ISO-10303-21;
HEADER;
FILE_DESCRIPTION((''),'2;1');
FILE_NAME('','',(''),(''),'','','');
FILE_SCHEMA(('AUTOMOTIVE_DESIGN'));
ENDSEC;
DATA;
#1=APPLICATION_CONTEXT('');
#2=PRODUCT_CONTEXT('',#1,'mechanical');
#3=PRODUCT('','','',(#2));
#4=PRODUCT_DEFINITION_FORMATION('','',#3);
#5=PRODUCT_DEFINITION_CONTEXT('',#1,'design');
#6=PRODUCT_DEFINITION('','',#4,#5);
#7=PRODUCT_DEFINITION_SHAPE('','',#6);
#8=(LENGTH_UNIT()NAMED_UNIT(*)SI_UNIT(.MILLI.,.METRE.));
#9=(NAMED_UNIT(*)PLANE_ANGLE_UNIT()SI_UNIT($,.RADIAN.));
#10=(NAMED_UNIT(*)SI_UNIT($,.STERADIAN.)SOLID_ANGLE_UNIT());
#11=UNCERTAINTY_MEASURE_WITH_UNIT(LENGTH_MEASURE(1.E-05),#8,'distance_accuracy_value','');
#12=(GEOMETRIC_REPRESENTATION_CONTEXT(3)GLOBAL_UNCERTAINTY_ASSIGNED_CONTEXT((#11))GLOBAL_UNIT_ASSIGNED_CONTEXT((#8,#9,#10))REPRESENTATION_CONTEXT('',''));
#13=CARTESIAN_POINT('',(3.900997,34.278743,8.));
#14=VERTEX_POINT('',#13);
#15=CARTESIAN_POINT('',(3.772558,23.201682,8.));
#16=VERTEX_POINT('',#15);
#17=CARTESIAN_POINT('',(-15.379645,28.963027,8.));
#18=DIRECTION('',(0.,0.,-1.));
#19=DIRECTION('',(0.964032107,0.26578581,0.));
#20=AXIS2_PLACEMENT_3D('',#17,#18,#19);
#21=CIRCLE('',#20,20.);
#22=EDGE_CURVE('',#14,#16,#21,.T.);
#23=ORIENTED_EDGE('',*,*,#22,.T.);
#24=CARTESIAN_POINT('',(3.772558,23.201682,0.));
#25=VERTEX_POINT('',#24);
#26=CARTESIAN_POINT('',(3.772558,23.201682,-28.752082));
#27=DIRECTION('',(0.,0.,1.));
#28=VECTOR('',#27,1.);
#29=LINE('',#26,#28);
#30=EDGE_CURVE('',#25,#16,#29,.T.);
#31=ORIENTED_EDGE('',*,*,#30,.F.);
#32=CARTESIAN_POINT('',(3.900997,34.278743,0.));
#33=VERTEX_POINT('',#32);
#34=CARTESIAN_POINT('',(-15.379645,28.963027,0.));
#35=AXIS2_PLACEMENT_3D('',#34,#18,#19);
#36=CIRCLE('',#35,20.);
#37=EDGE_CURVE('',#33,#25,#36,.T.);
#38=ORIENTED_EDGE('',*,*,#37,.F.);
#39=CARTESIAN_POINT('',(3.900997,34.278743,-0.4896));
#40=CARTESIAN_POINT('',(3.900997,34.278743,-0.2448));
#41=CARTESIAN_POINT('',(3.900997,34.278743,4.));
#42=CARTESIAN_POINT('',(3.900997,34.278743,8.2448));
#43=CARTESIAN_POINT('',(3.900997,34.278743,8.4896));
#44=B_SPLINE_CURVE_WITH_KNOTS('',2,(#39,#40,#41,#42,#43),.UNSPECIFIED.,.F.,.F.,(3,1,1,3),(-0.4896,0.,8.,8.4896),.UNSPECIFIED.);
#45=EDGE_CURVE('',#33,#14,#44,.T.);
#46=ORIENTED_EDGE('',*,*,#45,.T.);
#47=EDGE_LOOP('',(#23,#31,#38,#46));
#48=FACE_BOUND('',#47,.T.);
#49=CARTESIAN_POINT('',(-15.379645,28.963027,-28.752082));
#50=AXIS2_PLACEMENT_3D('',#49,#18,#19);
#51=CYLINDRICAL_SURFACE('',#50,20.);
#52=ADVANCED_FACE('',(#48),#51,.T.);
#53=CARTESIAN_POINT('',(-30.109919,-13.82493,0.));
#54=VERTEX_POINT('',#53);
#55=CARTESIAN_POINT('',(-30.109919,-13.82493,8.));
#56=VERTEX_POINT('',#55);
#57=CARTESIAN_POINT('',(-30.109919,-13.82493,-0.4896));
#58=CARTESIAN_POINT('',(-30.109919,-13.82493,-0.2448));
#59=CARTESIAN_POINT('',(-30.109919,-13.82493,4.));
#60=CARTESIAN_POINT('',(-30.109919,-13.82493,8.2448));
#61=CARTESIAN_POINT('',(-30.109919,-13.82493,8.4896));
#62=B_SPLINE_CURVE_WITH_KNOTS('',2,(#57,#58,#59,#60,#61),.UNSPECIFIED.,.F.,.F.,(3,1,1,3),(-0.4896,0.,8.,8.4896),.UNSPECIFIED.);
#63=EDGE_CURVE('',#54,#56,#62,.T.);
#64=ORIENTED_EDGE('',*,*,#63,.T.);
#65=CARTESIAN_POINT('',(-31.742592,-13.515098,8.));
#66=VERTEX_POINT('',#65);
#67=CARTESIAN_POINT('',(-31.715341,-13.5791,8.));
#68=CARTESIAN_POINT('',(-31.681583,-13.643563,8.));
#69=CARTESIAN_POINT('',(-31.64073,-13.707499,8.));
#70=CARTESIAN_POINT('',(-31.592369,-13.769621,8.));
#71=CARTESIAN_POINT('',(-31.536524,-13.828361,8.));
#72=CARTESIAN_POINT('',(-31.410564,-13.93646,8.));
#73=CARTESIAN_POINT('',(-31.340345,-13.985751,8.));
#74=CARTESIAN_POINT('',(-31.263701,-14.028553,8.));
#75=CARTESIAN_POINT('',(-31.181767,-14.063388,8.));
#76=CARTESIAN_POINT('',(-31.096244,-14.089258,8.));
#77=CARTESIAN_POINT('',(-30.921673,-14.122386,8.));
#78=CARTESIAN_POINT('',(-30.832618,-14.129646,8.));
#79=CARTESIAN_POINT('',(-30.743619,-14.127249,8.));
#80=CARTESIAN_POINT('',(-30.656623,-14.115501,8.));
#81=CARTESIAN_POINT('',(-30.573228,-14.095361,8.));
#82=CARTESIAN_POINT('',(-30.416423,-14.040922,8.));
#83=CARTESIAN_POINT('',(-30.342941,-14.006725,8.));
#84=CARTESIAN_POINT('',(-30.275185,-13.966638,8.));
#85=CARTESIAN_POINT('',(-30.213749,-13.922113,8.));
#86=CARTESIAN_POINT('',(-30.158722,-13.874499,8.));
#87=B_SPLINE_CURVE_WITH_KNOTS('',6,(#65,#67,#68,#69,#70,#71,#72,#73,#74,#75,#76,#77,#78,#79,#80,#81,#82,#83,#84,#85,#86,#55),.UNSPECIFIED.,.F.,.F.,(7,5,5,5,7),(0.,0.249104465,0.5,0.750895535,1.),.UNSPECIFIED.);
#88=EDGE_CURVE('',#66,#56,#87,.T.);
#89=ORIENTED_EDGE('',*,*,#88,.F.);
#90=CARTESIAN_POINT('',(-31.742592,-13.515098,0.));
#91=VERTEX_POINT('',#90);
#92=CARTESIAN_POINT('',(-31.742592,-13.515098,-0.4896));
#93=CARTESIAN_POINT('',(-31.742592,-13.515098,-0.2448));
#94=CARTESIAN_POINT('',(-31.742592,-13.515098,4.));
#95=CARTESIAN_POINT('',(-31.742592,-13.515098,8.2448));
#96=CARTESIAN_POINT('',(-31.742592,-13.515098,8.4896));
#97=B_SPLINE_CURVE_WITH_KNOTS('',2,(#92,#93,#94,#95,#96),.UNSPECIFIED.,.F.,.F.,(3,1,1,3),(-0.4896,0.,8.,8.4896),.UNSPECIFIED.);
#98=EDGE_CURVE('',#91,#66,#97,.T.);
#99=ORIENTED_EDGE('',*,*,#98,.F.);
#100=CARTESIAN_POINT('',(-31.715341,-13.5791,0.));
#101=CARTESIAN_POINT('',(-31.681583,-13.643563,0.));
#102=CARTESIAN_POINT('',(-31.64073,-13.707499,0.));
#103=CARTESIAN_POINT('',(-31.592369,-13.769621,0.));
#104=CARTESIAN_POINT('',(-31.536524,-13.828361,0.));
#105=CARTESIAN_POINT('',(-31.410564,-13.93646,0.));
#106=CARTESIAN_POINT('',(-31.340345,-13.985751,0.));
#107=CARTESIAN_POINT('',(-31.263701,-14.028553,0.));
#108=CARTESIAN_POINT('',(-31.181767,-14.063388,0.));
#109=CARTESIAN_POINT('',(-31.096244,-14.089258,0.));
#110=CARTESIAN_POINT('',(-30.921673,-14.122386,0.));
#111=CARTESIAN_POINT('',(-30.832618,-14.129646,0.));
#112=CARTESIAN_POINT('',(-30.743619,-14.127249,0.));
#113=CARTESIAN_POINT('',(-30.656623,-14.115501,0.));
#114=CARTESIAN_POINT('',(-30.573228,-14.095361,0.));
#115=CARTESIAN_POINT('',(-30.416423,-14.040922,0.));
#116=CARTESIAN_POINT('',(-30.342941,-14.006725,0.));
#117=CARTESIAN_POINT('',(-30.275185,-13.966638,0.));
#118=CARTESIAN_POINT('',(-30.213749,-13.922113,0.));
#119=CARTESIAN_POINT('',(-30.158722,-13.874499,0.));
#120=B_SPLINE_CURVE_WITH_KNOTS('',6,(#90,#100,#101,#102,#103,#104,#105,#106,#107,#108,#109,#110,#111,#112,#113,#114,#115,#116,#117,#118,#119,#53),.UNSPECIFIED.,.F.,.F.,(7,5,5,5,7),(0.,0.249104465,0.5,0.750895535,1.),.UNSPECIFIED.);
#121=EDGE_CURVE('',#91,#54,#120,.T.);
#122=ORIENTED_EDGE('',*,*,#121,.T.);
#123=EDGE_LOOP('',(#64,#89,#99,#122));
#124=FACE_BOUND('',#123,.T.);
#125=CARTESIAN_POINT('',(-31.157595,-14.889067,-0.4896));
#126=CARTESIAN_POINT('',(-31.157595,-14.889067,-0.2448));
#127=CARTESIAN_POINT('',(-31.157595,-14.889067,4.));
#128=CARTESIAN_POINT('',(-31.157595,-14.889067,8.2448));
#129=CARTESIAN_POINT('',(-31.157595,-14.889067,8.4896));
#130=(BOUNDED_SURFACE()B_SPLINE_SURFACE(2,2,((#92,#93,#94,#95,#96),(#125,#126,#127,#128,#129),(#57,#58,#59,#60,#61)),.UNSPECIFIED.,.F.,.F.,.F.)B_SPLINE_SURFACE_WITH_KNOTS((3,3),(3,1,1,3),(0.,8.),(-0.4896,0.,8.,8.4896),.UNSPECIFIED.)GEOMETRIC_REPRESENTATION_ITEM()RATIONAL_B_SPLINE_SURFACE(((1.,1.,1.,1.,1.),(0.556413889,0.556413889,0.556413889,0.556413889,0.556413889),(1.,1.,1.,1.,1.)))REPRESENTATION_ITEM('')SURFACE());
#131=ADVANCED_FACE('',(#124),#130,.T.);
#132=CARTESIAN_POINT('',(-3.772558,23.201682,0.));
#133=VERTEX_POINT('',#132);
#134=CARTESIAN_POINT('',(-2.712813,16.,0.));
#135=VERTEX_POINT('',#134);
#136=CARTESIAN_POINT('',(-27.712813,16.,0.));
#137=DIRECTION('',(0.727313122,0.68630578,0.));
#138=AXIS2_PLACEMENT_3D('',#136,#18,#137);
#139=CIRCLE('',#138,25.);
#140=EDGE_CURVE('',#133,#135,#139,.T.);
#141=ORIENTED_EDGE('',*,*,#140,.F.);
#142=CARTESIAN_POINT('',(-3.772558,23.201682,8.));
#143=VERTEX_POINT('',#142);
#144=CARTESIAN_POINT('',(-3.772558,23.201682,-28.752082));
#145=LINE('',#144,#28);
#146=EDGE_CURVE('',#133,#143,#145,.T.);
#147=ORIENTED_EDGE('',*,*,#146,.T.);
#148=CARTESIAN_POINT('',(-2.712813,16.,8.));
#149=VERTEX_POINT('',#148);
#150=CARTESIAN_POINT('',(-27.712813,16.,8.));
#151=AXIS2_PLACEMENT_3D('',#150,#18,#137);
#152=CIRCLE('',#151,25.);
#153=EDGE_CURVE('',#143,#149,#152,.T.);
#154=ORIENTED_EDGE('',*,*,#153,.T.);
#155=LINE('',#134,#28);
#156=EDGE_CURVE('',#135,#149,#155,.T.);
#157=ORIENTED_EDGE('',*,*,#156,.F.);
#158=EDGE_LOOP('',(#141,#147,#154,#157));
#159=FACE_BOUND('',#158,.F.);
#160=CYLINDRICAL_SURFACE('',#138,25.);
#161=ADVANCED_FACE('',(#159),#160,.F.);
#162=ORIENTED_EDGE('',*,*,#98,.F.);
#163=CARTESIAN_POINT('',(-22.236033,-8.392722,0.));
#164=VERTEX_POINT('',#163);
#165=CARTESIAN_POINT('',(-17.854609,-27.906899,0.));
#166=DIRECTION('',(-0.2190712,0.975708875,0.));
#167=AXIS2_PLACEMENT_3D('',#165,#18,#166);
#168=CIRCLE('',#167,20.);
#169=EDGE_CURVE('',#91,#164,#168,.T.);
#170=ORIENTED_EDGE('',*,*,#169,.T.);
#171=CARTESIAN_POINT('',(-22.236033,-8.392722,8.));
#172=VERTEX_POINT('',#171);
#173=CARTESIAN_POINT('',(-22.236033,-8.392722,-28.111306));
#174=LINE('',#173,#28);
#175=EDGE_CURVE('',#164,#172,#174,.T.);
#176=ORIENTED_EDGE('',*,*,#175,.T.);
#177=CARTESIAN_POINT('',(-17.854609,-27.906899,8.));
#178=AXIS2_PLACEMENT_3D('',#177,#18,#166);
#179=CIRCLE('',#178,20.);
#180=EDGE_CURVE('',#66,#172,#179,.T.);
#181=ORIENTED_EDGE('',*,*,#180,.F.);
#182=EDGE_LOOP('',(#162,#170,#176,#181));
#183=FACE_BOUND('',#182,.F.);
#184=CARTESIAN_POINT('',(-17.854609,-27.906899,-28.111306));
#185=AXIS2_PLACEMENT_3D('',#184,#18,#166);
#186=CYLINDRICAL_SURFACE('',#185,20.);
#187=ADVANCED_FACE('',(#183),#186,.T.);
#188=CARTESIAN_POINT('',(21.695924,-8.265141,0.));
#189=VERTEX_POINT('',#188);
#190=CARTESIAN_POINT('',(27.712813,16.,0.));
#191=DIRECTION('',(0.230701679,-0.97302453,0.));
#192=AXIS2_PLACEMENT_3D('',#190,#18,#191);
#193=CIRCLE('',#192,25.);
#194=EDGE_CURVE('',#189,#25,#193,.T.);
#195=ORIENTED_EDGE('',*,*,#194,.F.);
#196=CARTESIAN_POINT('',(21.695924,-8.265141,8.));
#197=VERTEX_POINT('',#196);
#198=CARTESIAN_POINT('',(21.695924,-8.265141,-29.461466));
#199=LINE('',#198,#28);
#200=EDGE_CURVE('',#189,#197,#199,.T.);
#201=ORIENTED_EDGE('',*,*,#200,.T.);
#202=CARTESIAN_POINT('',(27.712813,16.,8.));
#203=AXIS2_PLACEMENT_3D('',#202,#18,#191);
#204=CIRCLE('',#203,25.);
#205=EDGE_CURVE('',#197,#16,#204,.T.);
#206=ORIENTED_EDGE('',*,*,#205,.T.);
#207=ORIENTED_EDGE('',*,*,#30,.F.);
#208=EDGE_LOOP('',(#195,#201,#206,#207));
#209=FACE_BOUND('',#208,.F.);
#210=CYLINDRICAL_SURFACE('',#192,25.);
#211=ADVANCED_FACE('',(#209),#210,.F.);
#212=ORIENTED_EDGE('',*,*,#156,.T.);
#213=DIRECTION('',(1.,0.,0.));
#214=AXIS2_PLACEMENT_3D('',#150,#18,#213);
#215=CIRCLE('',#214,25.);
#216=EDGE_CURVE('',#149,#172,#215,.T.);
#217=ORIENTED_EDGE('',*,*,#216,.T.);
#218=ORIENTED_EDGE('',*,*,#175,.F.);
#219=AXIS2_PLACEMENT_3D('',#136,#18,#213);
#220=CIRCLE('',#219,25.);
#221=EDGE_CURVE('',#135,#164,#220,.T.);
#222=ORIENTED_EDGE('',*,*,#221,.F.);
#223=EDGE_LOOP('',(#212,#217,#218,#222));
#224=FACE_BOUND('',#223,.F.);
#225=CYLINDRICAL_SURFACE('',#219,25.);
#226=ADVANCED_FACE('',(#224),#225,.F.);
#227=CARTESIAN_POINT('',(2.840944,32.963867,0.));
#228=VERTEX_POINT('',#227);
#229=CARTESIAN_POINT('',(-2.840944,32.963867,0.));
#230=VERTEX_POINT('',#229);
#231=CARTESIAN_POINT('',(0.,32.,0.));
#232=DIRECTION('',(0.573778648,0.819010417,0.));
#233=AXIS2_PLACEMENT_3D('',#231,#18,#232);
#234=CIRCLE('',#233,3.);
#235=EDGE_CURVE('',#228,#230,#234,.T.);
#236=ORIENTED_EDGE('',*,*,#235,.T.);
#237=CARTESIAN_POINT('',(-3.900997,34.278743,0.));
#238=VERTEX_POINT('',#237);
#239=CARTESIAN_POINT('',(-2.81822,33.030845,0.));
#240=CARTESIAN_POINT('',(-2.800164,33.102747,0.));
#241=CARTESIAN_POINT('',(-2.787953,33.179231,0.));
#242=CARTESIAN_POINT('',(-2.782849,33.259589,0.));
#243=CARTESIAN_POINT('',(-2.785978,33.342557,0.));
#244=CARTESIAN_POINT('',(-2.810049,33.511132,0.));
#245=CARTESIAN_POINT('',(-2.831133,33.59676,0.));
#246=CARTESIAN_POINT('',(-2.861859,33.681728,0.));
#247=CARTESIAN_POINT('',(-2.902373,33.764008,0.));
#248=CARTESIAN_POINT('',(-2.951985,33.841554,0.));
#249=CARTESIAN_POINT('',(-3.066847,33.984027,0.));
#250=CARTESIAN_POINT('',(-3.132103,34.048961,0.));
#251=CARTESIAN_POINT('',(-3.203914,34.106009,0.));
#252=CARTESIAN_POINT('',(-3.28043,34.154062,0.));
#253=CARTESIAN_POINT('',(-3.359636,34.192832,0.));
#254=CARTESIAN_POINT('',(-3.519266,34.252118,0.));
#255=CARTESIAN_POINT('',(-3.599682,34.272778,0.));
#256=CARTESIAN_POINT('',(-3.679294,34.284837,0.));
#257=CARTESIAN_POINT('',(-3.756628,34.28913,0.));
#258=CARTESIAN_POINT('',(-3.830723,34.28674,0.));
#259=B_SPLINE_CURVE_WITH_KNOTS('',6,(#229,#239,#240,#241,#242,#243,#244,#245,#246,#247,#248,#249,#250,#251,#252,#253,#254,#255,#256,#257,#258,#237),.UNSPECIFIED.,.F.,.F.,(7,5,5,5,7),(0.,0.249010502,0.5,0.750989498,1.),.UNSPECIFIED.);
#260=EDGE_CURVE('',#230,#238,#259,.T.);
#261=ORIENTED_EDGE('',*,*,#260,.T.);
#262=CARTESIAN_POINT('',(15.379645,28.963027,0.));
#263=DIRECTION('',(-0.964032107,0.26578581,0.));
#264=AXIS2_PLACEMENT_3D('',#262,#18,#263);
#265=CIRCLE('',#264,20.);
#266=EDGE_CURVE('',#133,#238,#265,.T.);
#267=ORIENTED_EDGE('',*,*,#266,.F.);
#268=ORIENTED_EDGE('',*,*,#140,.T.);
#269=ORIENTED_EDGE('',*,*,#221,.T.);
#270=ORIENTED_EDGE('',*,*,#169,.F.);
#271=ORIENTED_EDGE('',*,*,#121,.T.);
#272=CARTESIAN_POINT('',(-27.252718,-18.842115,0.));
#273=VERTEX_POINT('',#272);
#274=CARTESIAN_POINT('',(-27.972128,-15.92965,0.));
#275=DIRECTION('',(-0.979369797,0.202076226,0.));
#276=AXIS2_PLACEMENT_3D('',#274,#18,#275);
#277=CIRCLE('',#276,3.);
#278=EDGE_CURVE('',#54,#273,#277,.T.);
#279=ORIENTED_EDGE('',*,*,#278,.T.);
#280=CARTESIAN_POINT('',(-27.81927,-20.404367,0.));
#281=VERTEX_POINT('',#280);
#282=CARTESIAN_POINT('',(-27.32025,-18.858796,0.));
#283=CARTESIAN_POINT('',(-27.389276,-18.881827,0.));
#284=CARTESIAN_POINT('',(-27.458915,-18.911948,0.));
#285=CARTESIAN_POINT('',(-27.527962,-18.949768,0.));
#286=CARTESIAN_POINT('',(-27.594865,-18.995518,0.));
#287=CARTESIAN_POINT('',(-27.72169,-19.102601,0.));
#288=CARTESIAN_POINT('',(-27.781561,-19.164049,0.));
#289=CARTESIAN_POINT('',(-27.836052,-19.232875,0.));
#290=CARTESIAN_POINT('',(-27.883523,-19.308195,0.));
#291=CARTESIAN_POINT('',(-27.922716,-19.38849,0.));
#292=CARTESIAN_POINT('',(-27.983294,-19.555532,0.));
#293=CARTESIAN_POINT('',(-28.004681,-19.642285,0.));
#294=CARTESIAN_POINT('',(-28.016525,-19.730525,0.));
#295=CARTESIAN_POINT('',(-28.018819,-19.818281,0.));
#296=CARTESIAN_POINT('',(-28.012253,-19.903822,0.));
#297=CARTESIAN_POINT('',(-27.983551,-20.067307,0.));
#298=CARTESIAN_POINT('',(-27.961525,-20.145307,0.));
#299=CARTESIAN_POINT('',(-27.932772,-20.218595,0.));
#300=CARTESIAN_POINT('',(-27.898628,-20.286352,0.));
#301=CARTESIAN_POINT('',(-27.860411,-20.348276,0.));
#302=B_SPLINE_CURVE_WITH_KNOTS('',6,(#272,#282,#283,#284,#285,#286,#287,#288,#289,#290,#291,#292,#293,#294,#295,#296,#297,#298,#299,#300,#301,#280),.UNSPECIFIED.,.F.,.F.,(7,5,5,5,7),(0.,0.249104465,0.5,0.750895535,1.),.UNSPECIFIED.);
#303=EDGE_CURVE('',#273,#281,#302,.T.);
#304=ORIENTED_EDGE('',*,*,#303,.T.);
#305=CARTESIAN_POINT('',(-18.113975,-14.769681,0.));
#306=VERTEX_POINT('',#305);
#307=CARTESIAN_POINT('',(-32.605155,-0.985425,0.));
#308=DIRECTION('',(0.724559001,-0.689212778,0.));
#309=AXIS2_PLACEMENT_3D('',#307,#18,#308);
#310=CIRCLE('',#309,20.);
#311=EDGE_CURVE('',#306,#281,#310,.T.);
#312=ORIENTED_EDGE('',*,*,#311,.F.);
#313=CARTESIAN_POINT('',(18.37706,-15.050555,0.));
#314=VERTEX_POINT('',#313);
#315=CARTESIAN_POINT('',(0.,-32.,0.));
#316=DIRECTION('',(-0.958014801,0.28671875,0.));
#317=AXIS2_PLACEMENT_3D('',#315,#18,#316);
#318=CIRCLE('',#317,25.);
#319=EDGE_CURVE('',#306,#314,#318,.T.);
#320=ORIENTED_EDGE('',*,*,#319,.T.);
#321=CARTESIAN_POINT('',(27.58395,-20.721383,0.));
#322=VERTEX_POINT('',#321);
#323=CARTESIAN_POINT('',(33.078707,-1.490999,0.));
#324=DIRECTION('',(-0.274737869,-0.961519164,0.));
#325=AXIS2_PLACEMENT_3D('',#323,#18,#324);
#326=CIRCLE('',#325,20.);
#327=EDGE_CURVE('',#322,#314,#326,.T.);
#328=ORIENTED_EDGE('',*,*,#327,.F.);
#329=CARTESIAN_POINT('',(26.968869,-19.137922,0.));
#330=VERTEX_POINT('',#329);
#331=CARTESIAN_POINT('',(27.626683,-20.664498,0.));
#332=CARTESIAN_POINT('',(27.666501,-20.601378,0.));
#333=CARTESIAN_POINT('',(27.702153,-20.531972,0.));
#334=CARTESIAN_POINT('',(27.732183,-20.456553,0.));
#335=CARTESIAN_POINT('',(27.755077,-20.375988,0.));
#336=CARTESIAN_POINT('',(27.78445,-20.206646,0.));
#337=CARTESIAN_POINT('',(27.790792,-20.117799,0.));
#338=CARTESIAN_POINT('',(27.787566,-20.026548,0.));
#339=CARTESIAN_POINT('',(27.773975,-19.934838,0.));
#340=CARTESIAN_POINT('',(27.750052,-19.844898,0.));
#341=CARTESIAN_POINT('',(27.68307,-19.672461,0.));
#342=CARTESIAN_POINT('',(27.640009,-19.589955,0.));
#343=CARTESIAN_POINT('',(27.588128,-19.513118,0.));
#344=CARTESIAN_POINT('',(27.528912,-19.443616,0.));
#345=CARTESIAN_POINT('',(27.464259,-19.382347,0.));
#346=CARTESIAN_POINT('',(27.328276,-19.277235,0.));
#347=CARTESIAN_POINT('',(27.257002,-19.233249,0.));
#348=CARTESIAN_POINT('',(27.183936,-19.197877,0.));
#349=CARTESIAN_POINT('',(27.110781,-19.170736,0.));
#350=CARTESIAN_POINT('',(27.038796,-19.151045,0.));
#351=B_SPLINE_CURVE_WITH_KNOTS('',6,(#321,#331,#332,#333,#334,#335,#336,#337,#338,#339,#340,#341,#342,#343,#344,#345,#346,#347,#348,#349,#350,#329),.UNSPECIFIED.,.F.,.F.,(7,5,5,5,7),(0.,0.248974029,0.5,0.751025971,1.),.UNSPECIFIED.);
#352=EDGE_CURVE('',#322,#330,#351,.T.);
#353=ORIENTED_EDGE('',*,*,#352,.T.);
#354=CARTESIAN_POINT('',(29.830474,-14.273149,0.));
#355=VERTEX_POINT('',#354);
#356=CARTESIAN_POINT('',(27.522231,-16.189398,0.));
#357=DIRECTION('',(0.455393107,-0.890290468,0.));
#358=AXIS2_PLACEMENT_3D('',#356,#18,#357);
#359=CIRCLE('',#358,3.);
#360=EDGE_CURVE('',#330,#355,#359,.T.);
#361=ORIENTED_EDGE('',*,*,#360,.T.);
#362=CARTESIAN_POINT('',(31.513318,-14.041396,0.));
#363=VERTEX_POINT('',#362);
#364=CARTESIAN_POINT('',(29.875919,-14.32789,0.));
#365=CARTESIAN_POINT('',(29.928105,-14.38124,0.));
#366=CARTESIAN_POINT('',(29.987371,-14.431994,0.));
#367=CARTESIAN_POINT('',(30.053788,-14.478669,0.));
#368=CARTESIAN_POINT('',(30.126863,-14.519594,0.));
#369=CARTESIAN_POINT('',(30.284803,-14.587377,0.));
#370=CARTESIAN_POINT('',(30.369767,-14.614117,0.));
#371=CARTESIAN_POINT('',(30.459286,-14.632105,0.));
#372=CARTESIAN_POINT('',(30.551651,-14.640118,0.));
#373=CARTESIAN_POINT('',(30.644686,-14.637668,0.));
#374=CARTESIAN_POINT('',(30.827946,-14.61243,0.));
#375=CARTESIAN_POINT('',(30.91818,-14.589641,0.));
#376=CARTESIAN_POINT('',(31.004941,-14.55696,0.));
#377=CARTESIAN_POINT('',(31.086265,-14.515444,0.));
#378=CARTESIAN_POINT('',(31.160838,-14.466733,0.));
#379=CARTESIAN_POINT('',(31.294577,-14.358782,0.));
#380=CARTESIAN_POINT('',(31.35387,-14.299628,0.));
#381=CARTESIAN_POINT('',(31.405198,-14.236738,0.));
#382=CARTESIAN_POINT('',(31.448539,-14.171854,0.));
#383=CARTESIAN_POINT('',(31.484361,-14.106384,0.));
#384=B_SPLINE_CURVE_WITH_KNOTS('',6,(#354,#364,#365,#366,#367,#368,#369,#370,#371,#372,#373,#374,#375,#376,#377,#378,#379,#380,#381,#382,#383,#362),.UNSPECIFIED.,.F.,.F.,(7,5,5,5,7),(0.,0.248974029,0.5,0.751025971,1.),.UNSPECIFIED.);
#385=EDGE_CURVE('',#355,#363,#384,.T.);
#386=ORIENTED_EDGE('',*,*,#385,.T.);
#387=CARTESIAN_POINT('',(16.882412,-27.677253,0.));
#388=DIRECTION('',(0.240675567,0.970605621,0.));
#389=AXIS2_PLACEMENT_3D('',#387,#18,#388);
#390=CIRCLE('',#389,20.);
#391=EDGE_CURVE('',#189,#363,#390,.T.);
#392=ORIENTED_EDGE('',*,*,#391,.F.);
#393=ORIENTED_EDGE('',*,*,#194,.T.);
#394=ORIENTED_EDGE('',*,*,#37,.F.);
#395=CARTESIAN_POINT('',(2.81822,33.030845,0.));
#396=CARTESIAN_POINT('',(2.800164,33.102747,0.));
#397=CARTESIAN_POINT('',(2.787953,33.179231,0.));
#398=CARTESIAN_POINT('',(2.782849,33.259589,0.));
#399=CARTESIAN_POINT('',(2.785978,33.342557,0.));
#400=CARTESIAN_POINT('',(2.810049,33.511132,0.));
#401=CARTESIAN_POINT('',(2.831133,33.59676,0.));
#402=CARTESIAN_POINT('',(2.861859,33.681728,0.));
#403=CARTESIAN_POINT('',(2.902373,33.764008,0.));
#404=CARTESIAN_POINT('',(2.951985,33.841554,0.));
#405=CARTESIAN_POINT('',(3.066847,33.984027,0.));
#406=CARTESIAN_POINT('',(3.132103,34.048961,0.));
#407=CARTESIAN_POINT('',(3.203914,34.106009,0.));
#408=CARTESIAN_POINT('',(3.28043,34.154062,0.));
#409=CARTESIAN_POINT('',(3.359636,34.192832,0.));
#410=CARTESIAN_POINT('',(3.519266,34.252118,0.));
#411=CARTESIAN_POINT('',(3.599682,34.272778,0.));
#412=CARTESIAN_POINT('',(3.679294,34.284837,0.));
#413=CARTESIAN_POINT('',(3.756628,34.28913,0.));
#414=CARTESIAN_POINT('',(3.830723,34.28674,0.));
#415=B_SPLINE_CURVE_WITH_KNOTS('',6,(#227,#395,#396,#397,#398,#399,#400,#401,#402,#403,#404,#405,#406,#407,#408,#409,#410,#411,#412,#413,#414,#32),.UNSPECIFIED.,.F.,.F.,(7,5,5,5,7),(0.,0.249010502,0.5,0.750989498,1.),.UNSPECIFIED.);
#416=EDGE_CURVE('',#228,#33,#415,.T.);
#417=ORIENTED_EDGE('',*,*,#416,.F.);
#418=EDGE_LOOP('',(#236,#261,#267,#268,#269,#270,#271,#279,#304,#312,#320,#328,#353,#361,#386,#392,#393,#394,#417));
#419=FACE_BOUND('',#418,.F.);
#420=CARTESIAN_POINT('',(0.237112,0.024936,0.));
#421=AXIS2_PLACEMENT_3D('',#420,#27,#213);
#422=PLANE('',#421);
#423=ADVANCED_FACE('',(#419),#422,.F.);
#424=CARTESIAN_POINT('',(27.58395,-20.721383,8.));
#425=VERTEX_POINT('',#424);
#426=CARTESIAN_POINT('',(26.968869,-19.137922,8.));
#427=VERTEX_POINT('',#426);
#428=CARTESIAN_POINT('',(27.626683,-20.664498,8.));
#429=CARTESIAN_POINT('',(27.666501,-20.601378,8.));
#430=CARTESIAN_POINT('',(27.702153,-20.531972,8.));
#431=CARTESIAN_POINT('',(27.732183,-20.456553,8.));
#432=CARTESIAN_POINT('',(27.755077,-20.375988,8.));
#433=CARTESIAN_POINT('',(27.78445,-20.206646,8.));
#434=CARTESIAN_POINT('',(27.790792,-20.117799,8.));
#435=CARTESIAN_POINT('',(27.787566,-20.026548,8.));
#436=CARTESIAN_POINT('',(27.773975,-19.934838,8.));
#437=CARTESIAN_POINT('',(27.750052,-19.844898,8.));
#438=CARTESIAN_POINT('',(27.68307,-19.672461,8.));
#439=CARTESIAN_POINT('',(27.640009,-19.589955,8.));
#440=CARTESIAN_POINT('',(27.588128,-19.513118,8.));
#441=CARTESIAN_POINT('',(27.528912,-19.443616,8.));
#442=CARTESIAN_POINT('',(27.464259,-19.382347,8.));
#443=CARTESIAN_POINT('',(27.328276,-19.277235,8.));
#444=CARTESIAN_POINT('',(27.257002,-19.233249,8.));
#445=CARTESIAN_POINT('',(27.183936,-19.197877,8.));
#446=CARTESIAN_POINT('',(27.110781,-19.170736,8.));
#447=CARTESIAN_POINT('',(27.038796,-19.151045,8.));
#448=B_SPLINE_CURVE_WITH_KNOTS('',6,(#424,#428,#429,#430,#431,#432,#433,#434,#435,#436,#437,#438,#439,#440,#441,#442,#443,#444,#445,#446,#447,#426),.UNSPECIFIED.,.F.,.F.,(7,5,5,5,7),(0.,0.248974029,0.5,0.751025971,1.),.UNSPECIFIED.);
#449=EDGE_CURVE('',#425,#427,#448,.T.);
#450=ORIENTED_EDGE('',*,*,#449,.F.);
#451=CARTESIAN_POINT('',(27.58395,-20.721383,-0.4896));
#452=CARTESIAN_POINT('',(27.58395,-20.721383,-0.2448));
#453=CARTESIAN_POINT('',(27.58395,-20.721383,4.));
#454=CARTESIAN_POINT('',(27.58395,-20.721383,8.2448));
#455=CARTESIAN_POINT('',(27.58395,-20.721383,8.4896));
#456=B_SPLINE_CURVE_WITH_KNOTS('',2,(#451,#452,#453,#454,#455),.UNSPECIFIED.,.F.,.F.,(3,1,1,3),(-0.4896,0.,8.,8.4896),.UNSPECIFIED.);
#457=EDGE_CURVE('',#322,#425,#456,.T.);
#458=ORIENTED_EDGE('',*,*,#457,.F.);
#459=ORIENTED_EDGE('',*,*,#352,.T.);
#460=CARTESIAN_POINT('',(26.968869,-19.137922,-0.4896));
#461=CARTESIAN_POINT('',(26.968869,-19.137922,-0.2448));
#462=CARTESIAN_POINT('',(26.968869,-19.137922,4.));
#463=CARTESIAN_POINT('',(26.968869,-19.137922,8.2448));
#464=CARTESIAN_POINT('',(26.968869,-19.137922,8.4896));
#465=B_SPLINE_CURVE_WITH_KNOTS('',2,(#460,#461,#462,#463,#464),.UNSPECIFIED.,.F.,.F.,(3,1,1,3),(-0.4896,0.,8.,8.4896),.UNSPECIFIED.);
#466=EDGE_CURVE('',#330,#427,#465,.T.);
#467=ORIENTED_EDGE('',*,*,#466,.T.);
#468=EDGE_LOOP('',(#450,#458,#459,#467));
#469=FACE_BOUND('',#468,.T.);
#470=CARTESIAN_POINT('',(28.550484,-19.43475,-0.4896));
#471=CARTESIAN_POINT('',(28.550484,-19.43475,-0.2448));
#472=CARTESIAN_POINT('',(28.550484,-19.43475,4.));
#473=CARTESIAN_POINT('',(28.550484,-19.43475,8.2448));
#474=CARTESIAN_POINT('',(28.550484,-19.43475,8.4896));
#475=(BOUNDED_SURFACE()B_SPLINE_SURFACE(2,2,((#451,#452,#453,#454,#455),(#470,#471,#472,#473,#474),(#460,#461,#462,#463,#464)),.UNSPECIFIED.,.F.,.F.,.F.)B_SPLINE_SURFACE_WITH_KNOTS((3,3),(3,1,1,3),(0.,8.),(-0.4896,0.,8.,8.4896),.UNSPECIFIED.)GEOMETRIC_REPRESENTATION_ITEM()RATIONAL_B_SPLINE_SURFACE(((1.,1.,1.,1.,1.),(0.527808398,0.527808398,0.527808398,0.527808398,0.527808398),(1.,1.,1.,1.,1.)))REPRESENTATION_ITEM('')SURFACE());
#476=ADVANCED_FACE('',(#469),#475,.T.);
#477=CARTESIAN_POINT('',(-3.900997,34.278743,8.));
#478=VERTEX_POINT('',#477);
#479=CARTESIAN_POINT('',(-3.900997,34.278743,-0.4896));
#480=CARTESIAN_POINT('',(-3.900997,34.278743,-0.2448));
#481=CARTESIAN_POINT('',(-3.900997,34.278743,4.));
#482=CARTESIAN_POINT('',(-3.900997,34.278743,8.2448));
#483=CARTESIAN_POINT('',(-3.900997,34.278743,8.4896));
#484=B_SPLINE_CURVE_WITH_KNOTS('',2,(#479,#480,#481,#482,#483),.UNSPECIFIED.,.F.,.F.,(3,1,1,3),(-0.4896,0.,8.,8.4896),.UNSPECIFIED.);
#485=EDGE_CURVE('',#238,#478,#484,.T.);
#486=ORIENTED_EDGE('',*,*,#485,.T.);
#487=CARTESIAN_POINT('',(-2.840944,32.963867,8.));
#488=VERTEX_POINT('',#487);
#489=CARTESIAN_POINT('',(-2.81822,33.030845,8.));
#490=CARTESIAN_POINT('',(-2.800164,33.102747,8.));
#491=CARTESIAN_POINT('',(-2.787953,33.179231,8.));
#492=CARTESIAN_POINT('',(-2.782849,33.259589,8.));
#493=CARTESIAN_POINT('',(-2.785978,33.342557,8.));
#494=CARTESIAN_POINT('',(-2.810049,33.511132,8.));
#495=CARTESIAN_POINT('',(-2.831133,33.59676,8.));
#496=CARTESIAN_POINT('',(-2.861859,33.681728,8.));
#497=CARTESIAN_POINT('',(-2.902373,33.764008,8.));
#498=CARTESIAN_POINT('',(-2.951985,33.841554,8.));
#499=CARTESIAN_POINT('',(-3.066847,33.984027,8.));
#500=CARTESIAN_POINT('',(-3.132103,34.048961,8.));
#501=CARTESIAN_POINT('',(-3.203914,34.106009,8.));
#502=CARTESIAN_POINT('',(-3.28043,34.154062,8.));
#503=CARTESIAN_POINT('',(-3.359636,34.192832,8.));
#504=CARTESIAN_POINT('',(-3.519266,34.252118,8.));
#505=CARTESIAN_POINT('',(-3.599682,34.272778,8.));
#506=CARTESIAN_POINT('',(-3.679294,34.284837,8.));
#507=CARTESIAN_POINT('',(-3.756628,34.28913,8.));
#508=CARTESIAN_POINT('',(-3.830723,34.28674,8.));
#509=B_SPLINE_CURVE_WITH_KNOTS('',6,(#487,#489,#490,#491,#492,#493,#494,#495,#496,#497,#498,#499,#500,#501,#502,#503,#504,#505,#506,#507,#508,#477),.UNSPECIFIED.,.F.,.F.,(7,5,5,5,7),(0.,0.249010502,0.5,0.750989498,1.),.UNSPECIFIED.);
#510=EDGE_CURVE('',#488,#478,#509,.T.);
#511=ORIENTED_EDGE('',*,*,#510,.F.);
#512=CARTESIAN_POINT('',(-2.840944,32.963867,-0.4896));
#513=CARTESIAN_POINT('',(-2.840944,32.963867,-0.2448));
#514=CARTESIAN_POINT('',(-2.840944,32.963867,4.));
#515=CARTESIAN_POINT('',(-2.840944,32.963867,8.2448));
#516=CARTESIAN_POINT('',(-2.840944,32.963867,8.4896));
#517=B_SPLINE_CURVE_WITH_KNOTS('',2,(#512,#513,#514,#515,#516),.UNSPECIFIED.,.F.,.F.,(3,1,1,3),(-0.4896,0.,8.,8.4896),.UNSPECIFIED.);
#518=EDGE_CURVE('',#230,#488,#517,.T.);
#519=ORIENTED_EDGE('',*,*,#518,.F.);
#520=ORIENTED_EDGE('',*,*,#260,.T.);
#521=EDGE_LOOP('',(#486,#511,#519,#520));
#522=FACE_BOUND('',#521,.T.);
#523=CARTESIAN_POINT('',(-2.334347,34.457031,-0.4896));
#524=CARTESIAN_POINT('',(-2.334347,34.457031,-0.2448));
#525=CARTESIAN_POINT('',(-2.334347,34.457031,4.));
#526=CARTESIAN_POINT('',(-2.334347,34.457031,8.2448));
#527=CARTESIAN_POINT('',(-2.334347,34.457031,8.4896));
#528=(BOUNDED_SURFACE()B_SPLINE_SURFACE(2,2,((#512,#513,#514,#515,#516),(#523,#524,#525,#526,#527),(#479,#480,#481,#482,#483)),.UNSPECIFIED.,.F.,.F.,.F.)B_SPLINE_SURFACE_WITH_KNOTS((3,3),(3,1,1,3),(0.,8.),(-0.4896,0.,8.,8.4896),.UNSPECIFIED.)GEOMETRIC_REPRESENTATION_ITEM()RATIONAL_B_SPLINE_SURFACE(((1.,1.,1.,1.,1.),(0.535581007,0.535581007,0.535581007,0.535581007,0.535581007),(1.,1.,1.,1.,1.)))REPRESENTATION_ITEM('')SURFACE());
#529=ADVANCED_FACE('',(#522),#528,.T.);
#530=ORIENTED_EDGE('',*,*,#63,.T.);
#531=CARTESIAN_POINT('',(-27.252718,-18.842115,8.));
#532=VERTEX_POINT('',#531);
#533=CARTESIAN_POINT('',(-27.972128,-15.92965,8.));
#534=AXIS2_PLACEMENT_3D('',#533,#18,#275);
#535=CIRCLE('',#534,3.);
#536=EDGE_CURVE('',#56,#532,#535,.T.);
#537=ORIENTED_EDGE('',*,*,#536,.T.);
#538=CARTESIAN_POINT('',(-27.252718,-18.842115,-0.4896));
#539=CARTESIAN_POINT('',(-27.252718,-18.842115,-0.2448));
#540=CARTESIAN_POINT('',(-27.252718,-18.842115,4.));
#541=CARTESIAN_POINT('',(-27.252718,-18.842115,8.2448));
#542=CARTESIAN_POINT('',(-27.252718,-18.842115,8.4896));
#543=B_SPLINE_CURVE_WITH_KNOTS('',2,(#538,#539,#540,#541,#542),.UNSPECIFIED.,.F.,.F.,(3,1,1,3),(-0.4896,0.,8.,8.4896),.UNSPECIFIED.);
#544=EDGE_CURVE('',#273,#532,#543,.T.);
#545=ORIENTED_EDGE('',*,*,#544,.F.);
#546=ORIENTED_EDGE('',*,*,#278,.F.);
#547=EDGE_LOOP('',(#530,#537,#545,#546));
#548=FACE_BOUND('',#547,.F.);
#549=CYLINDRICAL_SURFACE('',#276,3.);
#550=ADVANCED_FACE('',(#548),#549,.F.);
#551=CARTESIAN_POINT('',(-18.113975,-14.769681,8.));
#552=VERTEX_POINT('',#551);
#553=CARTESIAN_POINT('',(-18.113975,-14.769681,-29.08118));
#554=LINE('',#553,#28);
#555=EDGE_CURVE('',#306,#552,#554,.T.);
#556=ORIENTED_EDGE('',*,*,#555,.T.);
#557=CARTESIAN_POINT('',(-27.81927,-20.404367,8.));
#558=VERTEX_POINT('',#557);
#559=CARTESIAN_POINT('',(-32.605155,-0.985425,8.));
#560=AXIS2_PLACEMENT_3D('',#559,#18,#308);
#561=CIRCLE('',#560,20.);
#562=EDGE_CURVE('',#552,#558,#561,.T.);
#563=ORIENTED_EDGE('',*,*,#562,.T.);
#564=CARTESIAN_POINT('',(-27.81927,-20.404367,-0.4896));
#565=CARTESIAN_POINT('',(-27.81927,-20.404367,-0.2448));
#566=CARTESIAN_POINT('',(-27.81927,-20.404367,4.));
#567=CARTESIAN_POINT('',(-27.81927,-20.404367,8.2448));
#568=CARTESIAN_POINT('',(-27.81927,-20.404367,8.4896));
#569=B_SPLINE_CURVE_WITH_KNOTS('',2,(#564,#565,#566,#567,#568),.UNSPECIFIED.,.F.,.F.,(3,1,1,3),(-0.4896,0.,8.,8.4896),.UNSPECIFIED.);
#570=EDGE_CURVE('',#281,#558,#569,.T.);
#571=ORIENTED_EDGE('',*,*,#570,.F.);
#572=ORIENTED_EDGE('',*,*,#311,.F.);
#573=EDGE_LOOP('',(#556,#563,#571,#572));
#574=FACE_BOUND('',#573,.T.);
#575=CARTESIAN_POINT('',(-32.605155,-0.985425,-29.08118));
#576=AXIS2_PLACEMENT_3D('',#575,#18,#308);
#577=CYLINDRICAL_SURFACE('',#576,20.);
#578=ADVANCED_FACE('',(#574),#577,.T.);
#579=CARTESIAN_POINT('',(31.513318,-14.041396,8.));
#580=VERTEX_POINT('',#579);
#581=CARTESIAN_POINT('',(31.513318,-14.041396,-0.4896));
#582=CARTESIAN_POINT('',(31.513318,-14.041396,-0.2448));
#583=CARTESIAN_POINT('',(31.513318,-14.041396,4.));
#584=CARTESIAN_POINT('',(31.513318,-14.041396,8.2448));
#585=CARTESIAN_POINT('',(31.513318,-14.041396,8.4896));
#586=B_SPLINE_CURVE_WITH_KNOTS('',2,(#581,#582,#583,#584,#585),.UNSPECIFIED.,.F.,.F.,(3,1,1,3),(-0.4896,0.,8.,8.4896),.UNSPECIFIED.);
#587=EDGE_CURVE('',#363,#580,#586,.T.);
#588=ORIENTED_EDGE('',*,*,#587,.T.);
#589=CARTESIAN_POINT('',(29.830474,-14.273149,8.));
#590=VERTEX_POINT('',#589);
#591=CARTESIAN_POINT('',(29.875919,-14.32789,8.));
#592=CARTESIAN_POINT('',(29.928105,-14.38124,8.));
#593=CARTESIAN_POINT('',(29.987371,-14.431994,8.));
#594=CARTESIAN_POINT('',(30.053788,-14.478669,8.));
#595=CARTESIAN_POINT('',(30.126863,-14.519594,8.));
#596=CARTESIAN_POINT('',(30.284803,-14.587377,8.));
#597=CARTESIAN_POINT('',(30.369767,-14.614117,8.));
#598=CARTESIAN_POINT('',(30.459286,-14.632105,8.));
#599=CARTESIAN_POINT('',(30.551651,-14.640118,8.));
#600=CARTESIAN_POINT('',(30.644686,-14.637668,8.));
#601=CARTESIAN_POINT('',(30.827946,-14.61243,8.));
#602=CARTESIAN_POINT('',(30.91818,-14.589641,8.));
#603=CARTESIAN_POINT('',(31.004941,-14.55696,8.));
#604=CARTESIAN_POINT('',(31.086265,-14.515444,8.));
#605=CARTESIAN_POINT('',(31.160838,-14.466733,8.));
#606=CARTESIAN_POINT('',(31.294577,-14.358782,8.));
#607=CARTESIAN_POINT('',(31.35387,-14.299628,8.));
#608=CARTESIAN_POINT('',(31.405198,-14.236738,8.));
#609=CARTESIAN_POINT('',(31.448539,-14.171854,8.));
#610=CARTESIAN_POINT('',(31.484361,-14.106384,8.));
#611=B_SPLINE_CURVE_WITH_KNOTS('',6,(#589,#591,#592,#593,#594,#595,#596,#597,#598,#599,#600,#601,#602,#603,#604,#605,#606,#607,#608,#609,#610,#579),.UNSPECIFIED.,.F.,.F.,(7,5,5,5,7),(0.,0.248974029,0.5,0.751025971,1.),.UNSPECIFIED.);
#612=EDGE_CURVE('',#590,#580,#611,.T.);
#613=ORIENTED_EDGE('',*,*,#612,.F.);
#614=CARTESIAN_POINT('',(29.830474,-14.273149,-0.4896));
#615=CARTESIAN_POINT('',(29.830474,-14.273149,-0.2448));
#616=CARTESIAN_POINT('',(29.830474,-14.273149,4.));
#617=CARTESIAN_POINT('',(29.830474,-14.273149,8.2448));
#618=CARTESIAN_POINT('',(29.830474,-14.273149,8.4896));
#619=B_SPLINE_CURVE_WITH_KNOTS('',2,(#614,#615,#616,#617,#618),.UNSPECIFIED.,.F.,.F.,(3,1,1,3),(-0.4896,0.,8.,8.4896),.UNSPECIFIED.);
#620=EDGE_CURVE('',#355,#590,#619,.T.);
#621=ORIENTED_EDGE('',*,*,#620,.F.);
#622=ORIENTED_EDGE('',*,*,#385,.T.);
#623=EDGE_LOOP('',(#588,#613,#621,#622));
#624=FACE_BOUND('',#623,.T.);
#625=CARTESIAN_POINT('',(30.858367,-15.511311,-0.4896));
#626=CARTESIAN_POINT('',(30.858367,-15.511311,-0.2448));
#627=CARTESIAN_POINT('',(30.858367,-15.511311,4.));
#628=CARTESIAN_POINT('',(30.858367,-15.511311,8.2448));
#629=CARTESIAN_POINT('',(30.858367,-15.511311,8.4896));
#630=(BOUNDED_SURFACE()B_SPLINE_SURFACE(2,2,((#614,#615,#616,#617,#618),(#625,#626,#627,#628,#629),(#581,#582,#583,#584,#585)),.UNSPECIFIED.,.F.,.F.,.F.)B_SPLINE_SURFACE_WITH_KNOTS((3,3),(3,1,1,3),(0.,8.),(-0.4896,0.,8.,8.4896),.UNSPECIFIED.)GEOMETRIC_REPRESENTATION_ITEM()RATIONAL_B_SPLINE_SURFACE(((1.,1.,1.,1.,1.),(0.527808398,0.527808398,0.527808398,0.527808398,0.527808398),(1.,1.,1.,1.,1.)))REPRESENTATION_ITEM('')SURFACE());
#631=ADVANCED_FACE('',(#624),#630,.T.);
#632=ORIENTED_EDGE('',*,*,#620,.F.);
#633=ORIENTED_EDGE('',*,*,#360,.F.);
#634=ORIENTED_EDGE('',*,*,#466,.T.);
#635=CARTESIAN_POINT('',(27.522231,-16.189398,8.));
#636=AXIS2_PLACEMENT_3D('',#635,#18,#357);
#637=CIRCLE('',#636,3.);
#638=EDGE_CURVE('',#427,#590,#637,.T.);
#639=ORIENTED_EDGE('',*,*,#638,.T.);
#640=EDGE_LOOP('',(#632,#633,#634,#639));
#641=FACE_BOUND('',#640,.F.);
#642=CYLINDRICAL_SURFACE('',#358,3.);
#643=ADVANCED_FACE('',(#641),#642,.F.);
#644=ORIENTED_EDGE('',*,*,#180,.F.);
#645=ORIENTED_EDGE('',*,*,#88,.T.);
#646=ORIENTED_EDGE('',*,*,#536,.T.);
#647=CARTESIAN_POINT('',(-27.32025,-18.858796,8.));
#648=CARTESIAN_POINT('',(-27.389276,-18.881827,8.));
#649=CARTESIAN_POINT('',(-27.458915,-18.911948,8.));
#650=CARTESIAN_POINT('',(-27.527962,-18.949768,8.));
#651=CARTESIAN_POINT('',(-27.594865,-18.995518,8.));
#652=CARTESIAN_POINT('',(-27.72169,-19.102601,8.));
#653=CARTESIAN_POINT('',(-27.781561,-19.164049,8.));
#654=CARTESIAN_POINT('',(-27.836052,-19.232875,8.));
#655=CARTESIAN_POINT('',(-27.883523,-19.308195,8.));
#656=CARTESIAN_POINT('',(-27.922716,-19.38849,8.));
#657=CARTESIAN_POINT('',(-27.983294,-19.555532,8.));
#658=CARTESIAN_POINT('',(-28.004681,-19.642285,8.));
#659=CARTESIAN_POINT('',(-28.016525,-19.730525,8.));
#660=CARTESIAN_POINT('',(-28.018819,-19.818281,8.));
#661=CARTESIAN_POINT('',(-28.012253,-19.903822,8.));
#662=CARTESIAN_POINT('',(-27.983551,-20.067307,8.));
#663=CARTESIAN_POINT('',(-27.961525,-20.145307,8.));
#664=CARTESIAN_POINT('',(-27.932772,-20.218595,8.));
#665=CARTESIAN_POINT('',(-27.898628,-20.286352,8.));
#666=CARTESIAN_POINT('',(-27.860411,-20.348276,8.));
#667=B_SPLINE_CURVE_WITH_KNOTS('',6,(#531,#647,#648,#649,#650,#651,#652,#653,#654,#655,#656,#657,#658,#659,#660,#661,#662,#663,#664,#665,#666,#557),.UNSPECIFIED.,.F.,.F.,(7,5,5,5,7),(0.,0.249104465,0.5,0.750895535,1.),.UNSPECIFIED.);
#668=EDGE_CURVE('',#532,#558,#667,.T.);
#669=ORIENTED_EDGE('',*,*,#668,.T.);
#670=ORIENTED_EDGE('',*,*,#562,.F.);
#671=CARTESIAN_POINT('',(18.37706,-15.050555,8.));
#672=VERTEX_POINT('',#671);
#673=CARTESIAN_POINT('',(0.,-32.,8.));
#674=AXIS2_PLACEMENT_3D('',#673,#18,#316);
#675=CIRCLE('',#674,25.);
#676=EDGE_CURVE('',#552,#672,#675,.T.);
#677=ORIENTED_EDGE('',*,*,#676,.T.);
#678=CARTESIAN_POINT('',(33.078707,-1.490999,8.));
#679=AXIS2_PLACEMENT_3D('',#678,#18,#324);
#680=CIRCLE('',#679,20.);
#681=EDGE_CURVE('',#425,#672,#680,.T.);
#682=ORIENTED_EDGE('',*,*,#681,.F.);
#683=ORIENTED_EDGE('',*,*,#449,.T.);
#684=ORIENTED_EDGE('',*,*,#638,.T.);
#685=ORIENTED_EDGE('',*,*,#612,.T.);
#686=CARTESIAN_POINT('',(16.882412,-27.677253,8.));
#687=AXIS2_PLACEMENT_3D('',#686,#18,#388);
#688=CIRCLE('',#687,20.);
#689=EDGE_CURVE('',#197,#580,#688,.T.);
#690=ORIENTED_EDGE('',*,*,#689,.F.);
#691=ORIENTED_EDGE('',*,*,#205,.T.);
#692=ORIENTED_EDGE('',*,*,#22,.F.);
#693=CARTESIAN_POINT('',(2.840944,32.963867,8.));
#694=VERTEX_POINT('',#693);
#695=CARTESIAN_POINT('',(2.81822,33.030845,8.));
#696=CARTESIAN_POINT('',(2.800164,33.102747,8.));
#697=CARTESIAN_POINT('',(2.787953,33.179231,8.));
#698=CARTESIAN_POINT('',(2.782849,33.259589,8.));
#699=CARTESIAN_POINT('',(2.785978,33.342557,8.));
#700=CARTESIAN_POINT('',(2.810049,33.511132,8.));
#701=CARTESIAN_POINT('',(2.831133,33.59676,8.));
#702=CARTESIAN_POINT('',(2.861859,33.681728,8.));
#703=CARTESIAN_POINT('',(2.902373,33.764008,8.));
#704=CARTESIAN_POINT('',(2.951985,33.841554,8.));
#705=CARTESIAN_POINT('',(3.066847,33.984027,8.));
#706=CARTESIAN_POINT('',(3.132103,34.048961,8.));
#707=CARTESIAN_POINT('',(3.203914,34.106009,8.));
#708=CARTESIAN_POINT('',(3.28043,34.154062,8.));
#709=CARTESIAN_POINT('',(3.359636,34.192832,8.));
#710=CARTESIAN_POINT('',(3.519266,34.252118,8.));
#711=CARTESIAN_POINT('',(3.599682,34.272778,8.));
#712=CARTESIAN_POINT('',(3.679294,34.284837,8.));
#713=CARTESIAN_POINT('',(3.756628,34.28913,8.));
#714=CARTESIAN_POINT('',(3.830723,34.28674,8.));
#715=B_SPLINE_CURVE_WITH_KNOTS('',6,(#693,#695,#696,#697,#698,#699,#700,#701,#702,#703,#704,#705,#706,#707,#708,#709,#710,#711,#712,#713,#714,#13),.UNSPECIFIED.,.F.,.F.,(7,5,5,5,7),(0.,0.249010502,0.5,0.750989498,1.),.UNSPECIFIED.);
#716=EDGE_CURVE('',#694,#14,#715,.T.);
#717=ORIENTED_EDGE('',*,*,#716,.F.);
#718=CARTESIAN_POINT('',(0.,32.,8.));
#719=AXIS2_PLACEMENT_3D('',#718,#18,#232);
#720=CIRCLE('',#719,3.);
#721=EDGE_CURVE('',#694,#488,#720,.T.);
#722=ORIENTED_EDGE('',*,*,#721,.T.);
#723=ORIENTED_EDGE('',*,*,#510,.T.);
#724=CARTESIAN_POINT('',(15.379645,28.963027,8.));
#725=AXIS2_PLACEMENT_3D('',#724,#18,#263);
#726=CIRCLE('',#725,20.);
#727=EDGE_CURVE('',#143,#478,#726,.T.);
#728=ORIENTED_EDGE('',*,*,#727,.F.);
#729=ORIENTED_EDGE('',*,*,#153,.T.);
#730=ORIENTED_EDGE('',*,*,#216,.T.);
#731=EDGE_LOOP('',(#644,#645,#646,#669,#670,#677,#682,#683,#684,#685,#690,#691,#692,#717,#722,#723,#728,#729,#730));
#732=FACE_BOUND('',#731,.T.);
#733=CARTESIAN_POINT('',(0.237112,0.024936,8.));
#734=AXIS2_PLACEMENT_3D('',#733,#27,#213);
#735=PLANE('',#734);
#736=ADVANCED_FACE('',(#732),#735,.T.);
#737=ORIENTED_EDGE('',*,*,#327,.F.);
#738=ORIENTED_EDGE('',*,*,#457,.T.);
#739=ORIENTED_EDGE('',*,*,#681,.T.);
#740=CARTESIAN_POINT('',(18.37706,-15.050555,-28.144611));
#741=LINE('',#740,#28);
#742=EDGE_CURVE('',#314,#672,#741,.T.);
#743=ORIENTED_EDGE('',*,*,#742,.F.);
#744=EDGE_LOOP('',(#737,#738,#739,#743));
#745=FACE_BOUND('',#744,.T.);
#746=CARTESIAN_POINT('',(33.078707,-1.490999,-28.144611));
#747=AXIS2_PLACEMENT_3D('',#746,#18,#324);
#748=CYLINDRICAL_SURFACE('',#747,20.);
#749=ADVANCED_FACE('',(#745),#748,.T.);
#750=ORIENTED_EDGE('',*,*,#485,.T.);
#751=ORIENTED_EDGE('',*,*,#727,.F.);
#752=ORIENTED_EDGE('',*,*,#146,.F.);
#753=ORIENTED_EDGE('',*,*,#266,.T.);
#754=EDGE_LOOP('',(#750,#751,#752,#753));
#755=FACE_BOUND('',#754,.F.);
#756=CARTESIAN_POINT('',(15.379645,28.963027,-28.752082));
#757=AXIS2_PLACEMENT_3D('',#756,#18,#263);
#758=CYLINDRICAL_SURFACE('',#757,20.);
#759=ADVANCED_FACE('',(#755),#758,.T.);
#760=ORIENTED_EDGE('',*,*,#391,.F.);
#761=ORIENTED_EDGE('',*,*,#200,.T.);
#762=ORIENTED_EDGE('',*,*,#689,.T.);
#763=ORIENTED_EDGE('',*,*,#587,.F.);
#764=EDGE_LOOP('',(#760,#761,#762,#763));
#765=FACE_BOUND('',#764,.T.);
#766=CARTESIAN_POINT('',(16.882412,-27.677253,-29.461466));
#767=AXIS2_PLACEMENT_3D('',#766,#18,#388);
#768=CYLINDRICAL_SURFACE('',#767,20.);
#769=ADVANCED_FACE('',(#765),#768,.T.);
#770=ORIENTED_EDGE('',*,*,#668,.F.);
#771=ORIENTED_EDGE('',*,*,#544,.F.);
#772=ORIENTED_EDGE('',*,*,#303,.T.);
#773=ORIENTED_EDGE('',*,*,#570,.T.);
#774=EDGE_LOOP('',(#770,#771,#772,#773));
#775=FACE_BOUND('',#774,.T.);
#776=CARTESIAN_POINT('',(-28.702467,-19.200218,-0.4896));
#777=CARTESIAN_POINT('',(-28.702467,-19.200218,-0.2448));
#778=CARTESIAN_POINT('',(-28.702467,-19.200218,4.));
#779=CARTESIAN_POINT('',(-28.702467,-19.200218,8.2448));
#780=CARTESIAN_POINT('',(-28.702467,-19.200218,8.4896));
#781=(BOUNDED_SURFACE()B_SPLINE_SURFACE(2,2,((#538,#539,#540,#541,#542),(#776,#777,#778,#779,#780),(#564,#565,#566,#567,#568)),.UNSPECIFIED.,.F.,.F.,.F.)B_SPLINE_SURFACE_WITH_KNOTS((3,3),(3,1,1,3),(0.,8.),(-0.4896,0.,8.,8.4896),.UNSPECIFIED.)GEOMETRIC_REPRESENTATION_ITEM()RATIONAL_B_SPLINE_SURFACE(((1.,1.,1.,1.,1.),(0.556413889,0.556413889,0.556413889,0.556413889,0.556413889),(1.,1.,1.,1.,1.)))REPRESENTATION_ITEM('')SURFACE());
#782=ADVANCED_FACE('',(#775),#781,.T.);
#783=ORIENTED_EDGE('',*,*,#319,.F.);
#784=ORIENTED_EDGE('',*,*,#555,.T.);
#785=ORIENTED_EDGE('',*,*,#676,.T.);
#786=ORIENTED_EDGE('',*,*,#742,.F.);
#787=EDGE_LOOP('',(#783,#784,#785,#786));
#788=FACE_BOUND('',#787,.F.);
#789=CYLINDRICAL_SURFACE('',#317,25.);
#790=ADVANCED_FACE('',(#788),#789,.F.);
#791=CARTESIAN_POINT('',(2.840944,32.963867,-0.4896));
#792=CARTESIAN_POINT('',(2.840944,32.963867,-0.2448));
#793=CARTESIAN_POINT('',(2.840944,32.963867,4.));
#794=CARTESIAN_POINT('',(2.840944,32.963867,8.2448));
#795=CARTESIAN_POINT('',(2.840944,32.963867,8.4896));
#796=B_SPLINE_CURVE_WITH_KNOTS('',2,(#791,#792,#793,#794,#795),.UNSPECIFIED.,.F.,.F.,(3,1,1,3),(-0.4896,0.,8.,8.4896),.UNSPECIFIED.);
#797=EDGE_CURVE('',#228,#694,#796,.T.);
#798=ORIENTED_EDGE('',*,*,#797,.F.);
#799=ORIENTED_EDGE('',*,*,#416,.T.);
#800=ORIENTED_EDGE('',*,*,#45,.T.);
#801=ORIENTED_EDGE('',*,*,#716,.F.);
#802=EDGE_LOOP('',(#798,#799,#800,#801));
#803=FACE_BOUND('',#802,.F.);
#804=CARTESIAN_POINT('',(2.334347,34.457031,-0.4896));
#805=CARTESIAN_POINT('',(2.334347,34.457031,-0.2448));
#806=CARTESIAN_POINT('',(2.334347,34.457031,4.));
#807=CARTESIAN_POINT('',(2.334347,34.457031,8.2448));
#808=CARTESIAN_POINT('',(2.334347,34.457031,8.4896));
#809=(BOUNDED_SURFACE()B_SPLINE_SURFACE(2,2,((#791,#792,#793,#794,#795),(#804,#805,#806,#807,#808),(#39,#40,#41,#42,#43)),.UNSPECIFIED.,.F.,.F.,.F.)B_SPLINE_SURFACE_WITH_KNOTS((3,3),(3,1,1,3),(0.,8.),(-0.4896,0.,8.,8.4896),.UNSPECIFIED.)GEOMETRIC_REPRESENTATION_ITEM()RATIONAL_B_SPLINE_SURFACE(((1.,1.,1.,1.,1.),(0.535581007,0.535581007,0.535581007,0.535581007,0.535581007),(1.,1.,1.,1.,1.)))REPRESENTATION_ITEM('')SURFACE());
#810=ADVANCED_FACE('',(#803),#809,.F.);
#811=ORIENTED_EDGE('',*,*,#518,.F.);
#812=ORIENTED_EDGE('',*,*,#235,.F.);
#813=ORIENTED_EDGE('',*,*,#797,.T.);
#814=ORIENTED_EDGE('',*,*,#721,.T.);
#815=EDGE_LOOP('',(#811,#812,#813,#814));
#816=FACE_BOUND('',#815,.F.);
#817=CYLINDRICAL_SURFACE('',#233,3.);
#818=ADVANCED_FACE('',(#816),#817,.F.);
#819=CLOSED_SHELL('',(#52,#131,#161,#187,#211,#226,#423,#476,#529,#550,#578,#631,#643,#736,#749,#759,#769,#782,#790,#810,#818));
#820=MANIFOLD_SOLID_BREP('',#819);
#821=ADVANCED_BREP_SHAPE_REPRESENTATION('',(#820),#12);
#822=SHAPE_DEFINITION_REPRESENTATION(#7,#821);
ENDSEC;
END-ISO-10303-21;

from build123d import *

# Parameters (mm, degrees)
F1_DEPTH    = 8
F2_R        = 1
F3_T1_DEPTH = 64.2226111809
F3_T3_DEPTH = 65.5041643561
F3_T5_DEPTH = 66.9229315715
F3_T7_DEPTH = 64.2892221554
F3_T9_DEPTH = 66.1623607225


# Not quite as in the source:
# - a fillet or chamfer that OpenCascade refuses, or shapes differently, is made with other operations: its cross-section is extruded or revolved along the edge and cut away or added


with BuildPart() as f1:
    # F0 (on Top) → F1 (new body)
    with BuildSketch(Plane.XY):
        with BuildLine():
            ThreePointArc((1.7213359453, 34.45703125), (0, 29), (-1.7213359453, 34.45703125))
            ThreePointArc((-1.7213359453, 34.45703125), (-5.6630518779, 34.0320414232), (-9.5299848811, 33.1576444906))
            ThreePointArc((-9.5299848811, 33.1576444906), (-4.4795318248, 25.2311781209), (-2.7128129211, 16))
            ThreePointArc((-2.7128129211, 16), (-12.2077903389, -3.6110753077), (-33.4803548991, -8.3256132406))
            ThreePointArc((-33.4803548991, -8.3256132406), (-32.3848639744, -11.8941407997), (-30.9102371196, -15.3234213285))
            ThreePointArc((-30.9102371196, -15.3234213285), (-25.3652162283, -14.4450583373), (-28.9498248331, -18.7658637459))
            ThreePointArc((-28.9498248331, -18.7658637459), (-26.6234342426, -21.9418036891), (-23.950370018, -24.83203125))
            ThreePointArc((-23.950370018, -24.83203125), (0, -7), (23.950370018, -24.83203125))
            ThreePointArc((23.950370018, -24.83203125), (26.587584538, -21.9852302339), (28.8884099574, -18.8602696198))
            ThreePointArc((28.8884099574, -18.8602696198), (24.9364218636, -14.6683482508), (30.5204410338, -16.0857912178))
            ThreePointArc((30.5204410338, -16.0857912178), (32.2347725379, -12.2950981871), (33.4803548991, -8.3256132406))
            ThreePointArc((33.4803548991, -8.3256132406), (6.0621778265, 3.5), (9.5299848811, 33.1576444906))
            ThreePointArc((9.5299848811, 33.1576444906), (5.6630518779, 34.0320414232), (1.7213359453, 34.45703125))
        make_face()
    extrude(amount=F1_DEPTH)

    # F2
    f2_edges = [f1.edges().sort_by_distance(p)[0] for p in [
        (-30.910237, -15.323421, 4),
        (-28.949825, -18.765864, 4),
        (1.721336, 34.457031, 4),
        (-1.721336, 34.457031, 4),
        (28.88841, -18.86027, 4),
        (30.520441, -16.085791, 4),
    ]]
    fillet(f2_edges, radius=F2_R)

    # F3: fillet of radius 20 on 6 edges, made by hand

    # F3_s2 → F3_t1 (cut)
    with BuildSketch(Plane.XY.offset(-28.1113055904)):
        with BuildLine():
            ThreePointArc((-22.2360329208, -8.3927218823), (-27.3415731158, -10.3001532277), (-31.7425915451, -13.5150982979))
            ThreePointArc((-31.7425915451, -13.5150982979), (-32.7145361346, -10.9548676622), (-33.4803548991, -8.3256132406))
            ThreePointArc((-33.4803548991, -8.3256132406), (-27.8620158848, -8.9995547655), (-22.2360329208, -8.3927218823))
        make_face()
    extrude(amount=F3_T1_DEPTH, mode=Mode.SUBTRACT)

    # F3_s4 → F3_t3 (cut)
    with BuildSketch(Plane.XY.offset(-28.7520821781)):
        with BuildLine():
            ThreePointArc((-3.9009970628, 34.2787430037), (-4.619010619, 28.731142286), (-3.7725584788, 23.2016815561))
            ThreePointArc((-3.7725584788, 23.2016815561), (-6.0709826163, 28.5152379545), (-9.5299848811, 33.1576444906))
            ThreePointArc((-9.5299848811, 33.1576444906), (-6.7388451877, 33.8354542682), (-3.9009970628, 34.2787430037))
        make_face()
        with BuildLine():
            ThreePointArc((3.9009970628, 34.2787430037), (4.619010619, 28.731142286), (3.7725584788, 23.2016815561))
            ThreePointArc((3.7725584788, 23.2016815561), (6.0709826163, 28.5152379545), (9.5299848811, 33.1576444906))
            ThreePointArc((9.5299848811, 33.1576444906), (6.7388451877, 33.8354542682), (3.9009970628, 34.2787430037))
        make_face()
    extrude(amount=F3_T3_DEPTH, mode=Mode.SUBTRACT)

    # F3_s6 → F3_t5 (cut)
    with BuildSketch(Plane.XY.offset(-29.4614657857)):
        with BuildLine():
            ThreePointArc((21.695923744, -8.2651405236), (27.0245333746, -10.4395796023), (31.513317936, -14.0413956808))
            ThreePointArc((31.513317936, -14.0413956808), (32.6222611015, -11.2266682781), (33.4803548991, -8.3256132406))
            ThreePointArc((33.4803548991, -8.3256132406), (27.5845251828, -8.999670843), (21.695923744, -8.2651405236))
        make_face()
    extrude(amount=F3_T5_DEPTH, mode=Mode.SUBTRACT)

    # F3_s8 → F3_t7 (cut)
    with BuildSketch(Plane.XY.offset(-28.1446110777)):
        with BuildLine():
            ThreePointArc((27.5839500196, -20.7213827076), (22.5899865116, -18.5199962805), (18.3770596718, -15.0505552356))
            ThreePointArc((18.3770596718, -15.0505552356), (21.7214673604, -19.6234958203), (23.950370018, -24.83203125))
            ThreePointArc((23.950370018, -24.83203125), (25.8490017853, -22.8490504552), (27.5839500196, -20.7213827076))
        make_face()
    extrude(amount=F3_T7_DEPTH, mode=Mode.SUBTRACT)

    # F3_s10 → F3_t9 (cut)
    with BuildSketch(Plane.XY.offset(-29.0811803612)):
        with BuildLine():
            ThreePointArc((-18.1139750308, -14.7696805432), (-22.5633062196, -18.281704114), (-27.8192704457, -20.4043669804))
            ThreePointArc((-27.8192704457, -20.4043669804), (-25.9793181426, -22.7007715474), (-23.950370018, -24.83203125))
            ThreePointArc((-23.950370018, -24.83203125), (-21.6255637275, -19.4566753424), (-18.1139750308, -14.7696805432))
        make_face()
    extrude(amount=F3_T9_DEPTH, mode=Mode.SUBTRACT)


solid = f1.part
